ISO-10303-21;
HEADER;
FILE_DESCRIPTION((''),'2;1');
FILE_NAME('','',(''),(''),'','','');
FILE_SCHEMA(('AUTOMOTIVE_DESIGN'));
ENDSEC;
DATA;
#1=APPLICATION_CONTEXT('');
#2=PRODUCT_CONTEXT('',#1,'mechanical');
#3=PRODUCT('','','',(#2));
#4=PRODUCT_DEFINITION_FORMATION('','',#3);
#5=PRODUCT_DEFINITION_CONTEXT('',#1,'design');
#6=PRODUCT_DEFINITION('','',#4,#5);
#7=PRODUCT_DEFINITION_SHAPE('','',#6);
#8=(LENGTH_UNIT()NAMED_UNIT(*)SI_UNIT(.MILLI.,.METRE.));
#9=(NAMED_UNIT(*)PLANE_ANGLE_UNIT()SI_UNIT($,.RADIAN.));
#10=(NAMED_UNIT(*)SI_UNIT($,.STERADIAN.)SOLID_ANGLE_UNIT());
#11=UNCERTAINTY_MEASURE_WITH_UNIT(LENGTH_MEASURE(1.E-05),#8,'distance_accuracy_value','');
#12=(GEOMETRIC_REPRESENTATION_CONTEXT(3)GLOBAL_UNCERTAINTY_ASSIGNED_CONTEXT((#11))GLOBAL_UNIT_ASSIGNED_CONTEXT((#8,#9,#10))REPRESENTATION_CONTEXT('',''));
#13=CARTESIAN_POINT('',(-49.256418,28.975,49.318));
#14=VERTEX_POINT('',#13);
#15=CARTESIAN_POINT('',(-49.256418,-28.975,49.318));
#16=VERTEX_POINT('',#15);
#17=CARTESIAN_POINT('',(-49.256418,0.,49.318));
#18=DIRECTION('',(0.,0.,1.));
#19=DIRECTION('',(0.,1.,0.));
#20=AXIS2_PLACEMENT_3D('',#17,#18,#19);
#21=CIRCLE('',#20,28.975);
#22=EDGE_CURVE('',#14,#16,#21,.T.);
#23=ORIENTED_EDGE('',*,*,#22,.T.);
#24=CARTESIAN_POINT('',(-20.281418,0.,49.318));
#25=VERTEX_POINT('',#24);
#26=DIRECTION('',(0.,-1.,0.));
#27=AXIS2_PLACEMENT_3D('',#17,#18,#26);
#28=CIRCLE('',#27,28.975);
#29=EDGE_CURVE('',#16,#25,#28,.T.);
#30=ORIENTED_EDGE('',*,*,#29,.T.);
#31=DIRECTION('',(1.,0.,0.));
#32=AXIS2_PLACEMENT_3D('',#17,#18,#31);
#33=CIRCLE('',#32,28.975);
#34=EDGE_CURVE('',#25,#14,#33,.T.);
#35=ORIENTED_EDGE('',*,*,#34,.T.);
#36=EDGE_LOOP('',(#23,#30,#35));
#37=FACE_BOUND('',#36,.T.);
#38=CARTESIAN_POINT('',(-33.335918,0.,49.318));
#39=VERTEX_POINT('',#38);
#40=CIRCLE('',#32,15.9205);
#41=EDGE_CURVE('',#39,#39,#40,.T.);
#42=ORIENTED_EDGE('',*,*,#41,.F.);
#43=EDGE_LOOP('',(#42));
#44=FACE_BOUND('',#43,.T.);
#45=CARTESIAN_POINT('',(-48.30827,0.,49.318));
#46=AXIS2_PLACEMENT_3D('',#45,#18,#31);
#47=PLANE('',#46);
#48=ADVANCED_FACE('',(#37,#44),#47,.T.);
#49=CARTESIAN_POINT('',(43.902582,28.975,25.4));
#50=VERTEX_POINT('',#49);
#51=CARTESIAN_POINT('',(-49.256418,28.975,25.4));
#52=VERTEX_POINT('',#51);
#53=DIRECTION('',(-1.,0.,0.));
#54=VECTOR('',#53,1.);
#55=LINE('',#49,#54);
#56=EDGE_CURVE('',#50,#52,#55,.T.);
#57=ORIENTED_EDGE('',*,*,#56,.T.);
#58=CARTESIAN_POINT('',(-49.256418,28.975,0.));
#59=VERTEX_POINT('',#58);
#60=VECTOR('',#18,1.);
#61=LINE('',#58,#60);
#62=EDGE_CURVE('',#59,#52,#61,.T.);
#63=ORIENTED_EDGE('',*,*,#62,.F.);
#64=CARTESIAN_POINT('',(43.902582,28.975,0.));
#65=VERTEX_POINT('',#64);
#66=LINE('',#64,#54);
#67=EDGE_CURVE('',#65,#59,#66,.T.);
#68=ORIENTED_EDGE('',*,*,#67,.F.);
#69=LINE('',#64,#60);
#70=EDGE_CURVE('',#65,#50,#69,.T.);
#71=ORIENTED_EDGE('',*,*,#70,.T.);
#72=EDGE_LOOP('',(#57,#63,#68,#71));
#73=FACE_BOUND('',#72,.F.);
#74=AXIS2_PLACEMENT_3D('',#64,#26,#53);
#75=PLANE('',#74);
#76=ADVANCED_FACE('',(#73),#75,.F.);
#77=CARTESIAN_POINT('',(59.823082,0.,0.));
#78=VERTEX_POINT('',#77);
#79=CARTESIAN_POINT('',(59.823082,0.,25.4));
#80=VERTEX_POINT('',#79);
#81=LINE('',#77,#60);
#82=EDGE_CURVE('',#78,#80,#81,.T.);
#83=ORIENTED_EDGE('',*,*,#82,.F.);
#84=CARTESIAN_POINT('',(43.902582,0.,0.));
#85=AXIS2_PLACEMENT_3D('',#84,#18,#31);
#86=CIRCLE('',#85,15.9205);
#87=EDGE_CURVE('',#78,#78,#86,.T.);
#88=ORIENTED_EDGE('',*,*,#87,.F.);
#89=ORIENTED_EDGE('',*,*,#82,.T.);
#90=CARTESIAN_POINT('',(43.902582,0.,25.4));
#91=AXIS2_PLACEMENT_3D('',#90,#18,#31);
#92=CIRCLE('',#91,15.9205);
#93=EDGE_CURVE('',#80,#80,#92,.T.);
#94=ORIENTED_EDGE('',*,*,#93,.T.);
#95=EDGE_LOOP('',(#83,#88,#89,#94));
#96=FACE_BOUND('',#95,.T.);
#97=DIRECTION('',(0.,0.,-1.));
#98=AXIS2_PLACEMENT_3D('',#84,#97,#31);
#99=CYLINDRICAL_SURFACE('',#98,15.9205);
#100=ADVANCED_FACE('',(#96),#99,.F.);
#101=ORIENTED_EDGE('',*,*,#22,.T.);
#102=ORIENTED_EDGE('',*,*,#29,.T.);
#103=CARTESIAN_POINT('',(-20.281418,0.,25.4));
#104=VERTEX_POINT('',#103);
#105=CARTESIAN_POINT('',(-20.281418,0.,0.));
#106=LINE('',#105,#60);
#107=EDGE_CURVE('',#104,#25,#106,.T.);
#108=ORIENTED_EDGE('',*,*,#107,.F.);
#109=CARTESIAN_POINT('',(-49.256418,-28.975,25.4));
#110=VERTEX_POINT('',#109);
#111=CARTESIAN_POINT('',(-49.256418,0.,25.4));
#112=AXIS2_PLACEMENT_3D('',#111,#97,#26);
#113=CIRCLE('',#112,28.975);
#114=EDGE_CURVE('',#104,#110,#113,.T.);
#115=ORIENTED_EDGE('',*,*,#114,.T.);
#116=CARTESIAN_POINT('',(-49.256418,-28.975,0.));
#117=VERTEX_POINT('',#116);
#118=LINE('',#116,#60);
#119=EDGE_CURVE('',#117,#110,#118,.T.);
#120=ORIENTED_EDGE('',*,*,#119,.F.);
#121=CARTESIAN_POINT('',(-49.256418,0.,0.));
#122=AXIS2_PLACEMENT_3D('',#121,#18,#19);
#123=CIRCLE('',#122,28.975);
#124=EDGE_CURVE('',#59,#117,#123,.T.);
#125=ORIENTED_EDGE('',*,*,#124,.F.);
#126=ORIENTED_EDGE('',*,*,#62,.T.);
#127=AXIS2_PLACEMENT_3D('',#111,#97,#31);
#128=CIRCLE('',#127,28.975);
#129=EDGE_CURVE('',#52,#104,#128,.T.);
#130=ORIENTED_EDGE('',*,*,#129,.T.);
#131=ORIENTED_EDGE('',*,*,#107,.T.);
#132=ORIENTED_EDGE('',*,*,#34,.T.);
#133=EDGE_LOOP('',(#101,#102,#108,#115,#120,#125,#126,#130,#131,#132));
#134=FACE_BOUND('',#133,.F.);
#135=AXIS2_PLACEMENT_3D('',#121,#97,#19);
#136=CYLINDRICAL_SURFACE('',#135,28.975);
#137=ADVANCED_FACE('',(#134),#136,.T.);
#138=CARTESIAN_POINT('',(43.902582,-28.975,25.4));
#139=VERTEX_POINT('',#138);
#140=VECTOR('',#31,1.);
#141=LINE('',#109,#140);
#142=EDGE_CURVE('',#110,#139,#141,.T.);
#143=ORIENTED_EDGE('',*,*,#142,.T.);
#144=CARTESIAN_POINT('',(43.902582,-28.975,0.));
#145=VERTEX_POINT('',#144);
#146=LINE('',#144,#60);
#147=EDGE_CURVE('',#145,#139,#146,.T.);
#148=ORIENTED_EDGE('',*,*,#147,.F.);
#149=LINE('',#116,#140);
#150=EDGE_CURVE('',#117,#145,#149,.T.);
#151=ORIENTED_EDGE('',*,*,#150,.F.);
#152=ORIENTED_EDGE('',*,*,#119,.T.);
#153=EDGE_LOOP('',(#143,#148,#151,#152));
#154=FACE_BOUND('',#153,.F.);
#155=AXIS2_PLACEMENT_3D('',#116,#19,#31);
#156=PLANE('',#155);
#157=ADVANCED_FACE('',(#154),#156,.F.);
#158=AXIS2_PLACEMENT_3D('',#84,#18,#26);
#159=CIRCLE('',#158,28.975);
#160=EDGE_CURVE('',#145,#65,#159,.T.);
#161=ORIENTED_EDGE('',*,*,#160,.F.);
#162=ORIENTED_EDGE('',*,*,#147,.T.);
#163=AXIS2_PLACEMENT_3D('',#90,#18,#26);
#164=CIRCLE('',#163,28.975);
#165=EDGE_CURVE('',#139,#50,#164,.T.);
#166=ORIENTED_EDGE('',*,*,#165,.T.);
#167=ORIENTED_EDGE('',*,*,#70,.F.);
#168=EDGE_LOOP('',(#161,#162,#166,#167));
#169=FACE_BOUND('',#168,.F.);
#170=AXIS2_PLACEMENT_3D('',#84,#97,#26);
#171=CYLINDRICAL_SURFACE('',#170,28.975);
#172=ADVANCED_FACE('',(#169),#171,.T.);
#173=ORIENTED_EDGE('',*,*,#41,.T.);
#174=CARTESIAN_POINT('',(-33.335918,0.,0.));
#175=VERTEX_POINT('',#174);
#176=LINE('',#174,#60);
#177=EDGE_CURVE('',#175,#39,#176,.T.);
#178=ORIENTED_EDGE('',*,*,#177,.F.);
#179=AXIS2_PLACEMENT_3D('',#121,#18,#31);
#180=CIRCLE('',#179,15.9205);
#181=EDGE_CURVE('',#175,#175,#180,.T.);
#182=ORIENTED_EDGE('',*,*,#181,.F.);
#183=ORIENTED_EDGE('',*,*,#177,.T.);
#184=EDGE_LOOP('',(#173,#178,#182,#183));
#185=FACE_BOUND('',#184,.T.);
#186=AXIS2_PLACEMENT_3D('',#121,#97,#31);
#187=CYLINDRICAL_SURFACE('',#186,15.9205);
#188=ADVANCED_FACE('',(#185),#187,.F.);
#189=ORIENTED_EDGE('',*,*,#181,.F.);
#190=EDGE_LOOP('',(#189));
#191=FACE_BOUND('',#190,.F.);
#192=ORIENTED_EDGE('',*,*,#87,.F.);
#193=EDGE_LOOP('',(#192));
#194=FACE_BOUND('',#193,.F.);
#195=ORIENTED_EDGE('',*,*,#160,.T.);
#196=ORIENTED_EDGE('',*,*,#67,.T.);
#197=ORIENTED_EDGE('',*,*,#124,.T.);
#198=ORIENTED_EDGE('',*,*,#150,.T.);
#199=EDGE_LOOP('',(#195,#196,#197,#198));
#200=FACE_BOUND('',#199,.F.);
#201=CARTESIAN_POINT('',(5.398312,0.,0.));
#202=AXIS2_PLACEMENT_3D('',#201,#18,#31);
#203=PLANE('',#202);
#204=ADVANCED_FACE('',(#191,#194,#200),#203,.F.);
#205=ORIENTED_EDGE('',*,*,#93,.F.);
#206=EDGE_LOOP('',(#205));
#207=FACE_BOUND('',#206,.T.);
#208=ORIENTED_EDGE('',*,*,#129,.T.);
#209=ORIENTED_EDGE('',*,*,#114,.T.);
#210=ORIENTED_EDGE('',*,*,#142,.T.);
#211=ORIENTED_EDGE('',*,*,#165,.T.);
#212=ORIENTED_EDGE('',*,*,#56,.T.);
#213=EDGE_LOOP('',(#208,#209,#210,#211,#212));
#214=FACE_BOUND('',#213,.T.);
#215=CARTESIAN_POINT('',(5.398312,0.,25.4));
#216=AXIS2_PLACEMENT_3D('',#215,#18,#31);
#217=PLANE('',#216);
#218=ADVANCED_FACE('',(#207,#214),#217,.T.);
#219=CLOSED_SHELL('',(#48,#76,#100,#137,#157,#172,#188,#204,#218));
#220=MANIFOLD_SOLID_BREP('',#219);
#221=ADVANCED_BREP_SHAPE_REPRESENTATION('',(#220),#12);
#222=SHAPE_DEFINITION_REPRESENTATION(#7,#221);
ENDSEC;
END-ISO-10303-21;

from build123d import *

# Parameters (mm, degrees)
F0_R     = 15.9205
F1_DEPTH = 25.4
F2_DEPTH = 49.318


# Not quite as in the source:
# - a feature names something its author has since deleted; it is built from what else it names


with BuildPart() as f1:
    # F0 (on Top) → F1 (new body)
    with BuildSketch(Plane.XY):
        with BuildLine():
            Line((-49.2564179003, -28.975), (43.9025820997, -28.975))
            ThreePointArc((43.9025820997, -28.975), (72.8775820997, 0), (43.9025820997, 28.975))
            Line((43.9025820997, 28.975), (-49.2564179003, 28.975))
            ThreePointArc((-49.2564179003, 28.975), (-28.7679989154, 20.4884189849), (-20.2814179003, 0))
            ThreePointArc((-20.2814179003, 0), (-28.7679989154, -20.4884189849), (-49.2564179003, -28.975))
        make_face()
        with Locations((43.9025820997, 0)):
            Circle(F0_R, mode=Mode.SUBTRACT)
        with BuildLine():
            ThreePointArc((-49.2564179003, 28.975), (-78.2314179003, 0), (-49.2564179003, -28.975))
            ThreePointArc((-49.2564179003, -28.975), (-28.7679989154, -20.4884189849), (-20.2814179003, 0))
            ThreePointArc((-20.2814179003, 0), (-28.7679989154, 20.4884189849), (-49.2564179003, 28.975))
        make_face()
        with Locations((-49.2564179003, 0)):
            Circle(F0_R, mode=Mode.SUBTRACT)
    extrude(amount=F1_DEPTH)

    # F0 (on Top) → F2 (join)
    with BuildSketch(Plane.XY):
        with BuildLine():
            ThreePointArc((-49.2564179003, 28.975), (-78.2314179003, 0), (-49.2564179003, -28.975))
            ThreePointArc((-49.2564179003, -28.975), (-28.7679989154, -20.4884189849), (-20.2814179003, 0))
            ThreePointArc((-20.2814179003, 0), (-28.7679989154, 20.4884189849), (-49.2564179003, 28.975))
        make_face()
        with Locations((-49.2564179003, 0)):
            Circle(F0_R, mode=Mode.SUBTRACT)
    extrude(amount=F2_DEPTH)


solid = f1.part
